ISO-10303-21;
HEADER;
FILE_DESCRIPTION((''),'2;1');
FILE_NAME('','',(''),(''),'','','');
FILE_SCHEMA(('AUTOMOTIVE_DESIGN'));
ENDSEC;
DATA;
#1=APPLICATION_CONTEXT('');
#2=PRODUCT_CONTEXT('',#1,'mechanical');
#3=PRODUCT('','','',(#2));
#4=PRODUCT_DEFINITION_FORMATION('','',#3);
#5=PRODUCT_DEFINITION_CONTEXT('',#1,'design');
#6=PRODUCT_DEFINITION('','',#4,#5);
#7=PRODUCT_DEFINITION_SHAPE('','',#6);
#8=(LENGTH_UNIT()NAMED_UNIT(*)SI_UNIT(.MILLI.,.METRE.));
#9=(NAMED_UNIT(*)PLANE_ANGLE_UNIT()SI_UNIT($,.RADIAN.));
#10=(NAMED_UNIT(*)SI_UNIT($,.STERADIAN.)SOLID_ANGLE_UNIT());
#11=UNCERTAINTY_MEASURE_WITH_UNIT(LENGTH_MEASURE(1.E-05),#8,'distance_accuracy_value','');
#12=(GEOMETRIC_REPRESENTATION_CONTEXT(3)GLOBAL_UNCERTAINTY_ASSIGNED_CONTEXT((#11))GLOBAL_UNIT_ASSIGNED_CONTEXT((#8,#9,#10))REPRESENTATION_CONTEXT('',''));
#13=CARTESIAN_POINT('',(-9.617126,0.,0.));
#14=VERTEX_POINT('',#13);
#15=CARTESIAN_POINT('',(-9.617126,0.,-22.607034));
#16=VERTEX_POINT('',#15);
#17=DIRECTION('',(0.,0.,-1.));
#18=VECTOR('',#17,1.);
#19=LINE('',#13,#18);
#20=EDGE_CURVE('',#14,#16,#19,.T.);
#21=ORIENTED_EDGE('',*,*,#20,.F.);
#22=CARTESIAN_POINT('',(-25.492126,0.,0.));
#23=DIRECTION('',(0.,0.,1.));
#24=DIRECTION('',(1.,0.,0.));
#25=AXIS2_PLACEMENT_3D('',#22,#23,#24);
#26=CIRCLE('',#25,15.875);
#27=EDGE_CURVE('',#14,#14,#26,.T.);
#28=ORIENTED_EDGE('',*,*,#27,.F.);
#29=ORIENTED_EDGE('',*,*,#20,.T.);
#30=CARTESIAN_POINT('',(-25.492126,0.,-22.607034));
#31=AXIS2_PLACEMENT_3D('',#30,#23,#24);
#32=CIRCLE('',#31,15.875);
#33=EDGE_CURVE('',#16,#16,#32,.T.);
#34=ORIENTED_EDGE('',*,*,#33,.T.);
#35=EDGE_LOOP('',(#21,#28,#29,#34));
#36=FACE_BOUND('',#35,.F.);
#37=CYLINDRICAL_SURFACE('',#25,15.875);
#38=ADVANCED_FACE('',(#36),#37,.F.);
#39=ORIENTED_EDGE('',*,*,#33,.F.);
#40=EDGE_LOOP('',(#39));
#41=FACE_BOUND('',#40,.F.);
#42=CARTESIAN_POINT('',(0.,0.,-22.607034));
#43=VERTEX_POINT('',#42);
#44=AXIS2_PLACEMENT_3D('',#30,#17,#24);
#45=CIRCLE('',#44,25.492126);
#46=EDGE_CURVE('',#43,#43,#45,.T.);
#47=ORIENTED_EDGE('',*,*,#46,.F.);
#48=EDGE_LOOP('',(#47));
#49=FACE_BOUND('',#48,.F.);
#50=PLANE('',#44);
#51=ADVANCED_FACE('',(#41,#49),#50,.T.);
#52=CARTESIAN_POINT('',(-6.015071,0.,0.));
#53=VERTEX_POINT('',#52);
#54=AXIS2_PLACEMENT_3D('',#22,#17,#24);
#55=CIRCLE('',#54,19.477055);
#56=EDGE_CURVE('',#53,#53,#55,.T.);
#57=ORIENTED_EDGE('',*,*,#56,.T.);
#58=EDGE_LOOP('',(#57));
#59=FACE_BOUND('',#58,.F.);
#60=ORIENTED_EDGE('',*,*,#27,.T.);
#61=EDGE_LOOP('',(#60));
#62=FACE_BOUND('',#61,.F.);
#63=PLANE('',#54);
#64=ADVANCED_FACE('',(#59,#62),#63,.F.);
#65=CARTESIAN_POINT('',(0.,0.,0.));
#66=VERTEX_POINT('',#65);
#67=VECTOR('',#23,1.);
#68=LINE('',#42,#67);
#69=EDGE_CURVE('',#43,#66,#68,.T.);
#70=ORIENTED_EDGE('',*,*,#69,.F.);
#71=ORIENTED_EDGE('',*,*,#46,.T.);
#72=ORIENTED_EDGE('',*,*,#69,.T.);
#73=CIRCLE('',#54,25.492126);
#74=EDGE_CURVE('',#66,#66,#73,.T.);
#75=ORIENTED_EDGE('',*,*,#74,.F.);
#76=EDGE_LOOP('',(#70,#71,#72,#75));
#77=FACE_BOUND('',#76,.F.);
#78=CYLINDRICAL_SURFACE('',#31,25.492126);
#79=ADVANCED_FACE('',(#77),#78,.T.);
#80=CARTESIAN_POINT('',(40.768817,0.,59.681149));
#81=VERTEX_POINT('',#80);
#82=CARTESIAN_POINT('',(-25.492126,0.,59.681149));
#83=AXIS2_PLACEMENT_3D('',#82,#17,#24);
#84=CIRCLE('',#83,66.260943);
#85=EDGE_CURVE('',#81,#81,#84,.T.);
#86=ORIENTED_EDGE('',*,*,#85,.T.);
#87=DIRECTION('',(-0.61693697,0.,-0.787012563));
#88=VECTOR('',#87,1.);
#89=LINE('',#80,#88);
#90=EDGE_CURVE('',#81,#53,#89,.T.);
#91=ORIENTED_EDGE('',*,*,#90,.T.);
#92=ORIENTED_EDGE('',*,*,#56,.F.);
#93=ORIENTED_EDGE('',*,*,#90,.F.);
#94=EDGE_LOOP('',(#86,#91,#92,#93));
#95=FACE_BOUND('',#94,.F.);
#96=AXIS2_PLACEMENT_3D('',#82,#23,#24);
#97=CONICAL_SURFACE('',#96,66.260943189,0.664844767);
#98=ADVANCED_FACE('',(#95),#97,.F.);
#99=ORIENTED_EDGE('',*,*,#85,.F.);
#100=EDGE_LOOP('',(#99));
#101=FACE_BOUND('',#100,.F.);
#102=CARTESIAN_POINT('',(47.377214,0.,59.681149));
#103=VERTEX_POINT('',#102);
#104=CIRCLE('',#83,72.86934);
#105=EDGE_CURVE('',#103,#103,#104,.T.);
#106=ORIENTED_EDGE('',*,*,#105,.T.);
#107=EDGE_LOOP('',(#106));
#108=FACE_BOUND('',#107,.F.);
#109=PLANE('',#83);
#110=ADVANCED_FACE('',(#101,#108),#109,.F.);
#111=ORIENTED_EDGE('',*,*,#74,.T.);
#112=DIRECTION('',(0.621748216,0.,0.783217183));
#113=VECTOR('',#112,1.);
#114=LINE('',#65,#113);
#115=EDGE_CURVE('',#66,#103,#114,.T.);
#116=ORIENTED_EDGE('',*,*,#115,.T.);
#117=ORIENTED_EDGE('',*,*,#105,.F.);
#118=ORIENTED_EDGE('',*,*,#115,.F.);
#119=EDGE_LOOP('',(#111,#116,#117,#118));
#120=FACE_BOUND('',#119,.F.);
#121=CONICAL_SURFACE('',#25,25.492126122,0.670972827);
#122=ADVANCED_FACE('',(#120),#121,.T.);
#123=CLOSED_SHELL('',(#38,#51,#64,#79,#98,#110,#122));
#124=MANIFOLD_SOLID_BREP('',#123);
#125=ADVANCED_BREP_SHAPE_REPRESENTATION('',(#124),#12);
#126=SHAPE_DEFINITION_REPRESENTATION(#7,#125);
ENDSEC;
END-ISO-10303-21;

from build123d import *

# Parameters (mm, degrees)
F4_R     = 15.875
F5_DEPTH = 76.2


# Not quite as in the source:
# - a feature of the source that left no trace in its solid (it failed there, or was rolled back) is left out


with BuildPart() as f1:
    # F0 (on Front) → F1 (revolve)
    with BuildSketch(Plane.XZ):
        Polygon((0, -22.6070340723), (0, 0), (47.3772140821, 59.6811493339), (40.7688170671, 59.6811493339), (-6.0150707141, 0), (-25.4921261221, 0), (-25.4921261221, -22.6070340723), align=None)
    revolve(axis=Axis((-25.4921261221, 0, -11.3035170361), (0, 0, -1)))

    # F4 (on face) → F5 (cut)
    with BuildSketch(Plane.XY):
        with Locations((-25.4921261221, 0)):
            Circle(F4_R)
    extrude(amount=-F5_DEPTH, mode=Mode.SUBTRACT)


solid = f1.part
